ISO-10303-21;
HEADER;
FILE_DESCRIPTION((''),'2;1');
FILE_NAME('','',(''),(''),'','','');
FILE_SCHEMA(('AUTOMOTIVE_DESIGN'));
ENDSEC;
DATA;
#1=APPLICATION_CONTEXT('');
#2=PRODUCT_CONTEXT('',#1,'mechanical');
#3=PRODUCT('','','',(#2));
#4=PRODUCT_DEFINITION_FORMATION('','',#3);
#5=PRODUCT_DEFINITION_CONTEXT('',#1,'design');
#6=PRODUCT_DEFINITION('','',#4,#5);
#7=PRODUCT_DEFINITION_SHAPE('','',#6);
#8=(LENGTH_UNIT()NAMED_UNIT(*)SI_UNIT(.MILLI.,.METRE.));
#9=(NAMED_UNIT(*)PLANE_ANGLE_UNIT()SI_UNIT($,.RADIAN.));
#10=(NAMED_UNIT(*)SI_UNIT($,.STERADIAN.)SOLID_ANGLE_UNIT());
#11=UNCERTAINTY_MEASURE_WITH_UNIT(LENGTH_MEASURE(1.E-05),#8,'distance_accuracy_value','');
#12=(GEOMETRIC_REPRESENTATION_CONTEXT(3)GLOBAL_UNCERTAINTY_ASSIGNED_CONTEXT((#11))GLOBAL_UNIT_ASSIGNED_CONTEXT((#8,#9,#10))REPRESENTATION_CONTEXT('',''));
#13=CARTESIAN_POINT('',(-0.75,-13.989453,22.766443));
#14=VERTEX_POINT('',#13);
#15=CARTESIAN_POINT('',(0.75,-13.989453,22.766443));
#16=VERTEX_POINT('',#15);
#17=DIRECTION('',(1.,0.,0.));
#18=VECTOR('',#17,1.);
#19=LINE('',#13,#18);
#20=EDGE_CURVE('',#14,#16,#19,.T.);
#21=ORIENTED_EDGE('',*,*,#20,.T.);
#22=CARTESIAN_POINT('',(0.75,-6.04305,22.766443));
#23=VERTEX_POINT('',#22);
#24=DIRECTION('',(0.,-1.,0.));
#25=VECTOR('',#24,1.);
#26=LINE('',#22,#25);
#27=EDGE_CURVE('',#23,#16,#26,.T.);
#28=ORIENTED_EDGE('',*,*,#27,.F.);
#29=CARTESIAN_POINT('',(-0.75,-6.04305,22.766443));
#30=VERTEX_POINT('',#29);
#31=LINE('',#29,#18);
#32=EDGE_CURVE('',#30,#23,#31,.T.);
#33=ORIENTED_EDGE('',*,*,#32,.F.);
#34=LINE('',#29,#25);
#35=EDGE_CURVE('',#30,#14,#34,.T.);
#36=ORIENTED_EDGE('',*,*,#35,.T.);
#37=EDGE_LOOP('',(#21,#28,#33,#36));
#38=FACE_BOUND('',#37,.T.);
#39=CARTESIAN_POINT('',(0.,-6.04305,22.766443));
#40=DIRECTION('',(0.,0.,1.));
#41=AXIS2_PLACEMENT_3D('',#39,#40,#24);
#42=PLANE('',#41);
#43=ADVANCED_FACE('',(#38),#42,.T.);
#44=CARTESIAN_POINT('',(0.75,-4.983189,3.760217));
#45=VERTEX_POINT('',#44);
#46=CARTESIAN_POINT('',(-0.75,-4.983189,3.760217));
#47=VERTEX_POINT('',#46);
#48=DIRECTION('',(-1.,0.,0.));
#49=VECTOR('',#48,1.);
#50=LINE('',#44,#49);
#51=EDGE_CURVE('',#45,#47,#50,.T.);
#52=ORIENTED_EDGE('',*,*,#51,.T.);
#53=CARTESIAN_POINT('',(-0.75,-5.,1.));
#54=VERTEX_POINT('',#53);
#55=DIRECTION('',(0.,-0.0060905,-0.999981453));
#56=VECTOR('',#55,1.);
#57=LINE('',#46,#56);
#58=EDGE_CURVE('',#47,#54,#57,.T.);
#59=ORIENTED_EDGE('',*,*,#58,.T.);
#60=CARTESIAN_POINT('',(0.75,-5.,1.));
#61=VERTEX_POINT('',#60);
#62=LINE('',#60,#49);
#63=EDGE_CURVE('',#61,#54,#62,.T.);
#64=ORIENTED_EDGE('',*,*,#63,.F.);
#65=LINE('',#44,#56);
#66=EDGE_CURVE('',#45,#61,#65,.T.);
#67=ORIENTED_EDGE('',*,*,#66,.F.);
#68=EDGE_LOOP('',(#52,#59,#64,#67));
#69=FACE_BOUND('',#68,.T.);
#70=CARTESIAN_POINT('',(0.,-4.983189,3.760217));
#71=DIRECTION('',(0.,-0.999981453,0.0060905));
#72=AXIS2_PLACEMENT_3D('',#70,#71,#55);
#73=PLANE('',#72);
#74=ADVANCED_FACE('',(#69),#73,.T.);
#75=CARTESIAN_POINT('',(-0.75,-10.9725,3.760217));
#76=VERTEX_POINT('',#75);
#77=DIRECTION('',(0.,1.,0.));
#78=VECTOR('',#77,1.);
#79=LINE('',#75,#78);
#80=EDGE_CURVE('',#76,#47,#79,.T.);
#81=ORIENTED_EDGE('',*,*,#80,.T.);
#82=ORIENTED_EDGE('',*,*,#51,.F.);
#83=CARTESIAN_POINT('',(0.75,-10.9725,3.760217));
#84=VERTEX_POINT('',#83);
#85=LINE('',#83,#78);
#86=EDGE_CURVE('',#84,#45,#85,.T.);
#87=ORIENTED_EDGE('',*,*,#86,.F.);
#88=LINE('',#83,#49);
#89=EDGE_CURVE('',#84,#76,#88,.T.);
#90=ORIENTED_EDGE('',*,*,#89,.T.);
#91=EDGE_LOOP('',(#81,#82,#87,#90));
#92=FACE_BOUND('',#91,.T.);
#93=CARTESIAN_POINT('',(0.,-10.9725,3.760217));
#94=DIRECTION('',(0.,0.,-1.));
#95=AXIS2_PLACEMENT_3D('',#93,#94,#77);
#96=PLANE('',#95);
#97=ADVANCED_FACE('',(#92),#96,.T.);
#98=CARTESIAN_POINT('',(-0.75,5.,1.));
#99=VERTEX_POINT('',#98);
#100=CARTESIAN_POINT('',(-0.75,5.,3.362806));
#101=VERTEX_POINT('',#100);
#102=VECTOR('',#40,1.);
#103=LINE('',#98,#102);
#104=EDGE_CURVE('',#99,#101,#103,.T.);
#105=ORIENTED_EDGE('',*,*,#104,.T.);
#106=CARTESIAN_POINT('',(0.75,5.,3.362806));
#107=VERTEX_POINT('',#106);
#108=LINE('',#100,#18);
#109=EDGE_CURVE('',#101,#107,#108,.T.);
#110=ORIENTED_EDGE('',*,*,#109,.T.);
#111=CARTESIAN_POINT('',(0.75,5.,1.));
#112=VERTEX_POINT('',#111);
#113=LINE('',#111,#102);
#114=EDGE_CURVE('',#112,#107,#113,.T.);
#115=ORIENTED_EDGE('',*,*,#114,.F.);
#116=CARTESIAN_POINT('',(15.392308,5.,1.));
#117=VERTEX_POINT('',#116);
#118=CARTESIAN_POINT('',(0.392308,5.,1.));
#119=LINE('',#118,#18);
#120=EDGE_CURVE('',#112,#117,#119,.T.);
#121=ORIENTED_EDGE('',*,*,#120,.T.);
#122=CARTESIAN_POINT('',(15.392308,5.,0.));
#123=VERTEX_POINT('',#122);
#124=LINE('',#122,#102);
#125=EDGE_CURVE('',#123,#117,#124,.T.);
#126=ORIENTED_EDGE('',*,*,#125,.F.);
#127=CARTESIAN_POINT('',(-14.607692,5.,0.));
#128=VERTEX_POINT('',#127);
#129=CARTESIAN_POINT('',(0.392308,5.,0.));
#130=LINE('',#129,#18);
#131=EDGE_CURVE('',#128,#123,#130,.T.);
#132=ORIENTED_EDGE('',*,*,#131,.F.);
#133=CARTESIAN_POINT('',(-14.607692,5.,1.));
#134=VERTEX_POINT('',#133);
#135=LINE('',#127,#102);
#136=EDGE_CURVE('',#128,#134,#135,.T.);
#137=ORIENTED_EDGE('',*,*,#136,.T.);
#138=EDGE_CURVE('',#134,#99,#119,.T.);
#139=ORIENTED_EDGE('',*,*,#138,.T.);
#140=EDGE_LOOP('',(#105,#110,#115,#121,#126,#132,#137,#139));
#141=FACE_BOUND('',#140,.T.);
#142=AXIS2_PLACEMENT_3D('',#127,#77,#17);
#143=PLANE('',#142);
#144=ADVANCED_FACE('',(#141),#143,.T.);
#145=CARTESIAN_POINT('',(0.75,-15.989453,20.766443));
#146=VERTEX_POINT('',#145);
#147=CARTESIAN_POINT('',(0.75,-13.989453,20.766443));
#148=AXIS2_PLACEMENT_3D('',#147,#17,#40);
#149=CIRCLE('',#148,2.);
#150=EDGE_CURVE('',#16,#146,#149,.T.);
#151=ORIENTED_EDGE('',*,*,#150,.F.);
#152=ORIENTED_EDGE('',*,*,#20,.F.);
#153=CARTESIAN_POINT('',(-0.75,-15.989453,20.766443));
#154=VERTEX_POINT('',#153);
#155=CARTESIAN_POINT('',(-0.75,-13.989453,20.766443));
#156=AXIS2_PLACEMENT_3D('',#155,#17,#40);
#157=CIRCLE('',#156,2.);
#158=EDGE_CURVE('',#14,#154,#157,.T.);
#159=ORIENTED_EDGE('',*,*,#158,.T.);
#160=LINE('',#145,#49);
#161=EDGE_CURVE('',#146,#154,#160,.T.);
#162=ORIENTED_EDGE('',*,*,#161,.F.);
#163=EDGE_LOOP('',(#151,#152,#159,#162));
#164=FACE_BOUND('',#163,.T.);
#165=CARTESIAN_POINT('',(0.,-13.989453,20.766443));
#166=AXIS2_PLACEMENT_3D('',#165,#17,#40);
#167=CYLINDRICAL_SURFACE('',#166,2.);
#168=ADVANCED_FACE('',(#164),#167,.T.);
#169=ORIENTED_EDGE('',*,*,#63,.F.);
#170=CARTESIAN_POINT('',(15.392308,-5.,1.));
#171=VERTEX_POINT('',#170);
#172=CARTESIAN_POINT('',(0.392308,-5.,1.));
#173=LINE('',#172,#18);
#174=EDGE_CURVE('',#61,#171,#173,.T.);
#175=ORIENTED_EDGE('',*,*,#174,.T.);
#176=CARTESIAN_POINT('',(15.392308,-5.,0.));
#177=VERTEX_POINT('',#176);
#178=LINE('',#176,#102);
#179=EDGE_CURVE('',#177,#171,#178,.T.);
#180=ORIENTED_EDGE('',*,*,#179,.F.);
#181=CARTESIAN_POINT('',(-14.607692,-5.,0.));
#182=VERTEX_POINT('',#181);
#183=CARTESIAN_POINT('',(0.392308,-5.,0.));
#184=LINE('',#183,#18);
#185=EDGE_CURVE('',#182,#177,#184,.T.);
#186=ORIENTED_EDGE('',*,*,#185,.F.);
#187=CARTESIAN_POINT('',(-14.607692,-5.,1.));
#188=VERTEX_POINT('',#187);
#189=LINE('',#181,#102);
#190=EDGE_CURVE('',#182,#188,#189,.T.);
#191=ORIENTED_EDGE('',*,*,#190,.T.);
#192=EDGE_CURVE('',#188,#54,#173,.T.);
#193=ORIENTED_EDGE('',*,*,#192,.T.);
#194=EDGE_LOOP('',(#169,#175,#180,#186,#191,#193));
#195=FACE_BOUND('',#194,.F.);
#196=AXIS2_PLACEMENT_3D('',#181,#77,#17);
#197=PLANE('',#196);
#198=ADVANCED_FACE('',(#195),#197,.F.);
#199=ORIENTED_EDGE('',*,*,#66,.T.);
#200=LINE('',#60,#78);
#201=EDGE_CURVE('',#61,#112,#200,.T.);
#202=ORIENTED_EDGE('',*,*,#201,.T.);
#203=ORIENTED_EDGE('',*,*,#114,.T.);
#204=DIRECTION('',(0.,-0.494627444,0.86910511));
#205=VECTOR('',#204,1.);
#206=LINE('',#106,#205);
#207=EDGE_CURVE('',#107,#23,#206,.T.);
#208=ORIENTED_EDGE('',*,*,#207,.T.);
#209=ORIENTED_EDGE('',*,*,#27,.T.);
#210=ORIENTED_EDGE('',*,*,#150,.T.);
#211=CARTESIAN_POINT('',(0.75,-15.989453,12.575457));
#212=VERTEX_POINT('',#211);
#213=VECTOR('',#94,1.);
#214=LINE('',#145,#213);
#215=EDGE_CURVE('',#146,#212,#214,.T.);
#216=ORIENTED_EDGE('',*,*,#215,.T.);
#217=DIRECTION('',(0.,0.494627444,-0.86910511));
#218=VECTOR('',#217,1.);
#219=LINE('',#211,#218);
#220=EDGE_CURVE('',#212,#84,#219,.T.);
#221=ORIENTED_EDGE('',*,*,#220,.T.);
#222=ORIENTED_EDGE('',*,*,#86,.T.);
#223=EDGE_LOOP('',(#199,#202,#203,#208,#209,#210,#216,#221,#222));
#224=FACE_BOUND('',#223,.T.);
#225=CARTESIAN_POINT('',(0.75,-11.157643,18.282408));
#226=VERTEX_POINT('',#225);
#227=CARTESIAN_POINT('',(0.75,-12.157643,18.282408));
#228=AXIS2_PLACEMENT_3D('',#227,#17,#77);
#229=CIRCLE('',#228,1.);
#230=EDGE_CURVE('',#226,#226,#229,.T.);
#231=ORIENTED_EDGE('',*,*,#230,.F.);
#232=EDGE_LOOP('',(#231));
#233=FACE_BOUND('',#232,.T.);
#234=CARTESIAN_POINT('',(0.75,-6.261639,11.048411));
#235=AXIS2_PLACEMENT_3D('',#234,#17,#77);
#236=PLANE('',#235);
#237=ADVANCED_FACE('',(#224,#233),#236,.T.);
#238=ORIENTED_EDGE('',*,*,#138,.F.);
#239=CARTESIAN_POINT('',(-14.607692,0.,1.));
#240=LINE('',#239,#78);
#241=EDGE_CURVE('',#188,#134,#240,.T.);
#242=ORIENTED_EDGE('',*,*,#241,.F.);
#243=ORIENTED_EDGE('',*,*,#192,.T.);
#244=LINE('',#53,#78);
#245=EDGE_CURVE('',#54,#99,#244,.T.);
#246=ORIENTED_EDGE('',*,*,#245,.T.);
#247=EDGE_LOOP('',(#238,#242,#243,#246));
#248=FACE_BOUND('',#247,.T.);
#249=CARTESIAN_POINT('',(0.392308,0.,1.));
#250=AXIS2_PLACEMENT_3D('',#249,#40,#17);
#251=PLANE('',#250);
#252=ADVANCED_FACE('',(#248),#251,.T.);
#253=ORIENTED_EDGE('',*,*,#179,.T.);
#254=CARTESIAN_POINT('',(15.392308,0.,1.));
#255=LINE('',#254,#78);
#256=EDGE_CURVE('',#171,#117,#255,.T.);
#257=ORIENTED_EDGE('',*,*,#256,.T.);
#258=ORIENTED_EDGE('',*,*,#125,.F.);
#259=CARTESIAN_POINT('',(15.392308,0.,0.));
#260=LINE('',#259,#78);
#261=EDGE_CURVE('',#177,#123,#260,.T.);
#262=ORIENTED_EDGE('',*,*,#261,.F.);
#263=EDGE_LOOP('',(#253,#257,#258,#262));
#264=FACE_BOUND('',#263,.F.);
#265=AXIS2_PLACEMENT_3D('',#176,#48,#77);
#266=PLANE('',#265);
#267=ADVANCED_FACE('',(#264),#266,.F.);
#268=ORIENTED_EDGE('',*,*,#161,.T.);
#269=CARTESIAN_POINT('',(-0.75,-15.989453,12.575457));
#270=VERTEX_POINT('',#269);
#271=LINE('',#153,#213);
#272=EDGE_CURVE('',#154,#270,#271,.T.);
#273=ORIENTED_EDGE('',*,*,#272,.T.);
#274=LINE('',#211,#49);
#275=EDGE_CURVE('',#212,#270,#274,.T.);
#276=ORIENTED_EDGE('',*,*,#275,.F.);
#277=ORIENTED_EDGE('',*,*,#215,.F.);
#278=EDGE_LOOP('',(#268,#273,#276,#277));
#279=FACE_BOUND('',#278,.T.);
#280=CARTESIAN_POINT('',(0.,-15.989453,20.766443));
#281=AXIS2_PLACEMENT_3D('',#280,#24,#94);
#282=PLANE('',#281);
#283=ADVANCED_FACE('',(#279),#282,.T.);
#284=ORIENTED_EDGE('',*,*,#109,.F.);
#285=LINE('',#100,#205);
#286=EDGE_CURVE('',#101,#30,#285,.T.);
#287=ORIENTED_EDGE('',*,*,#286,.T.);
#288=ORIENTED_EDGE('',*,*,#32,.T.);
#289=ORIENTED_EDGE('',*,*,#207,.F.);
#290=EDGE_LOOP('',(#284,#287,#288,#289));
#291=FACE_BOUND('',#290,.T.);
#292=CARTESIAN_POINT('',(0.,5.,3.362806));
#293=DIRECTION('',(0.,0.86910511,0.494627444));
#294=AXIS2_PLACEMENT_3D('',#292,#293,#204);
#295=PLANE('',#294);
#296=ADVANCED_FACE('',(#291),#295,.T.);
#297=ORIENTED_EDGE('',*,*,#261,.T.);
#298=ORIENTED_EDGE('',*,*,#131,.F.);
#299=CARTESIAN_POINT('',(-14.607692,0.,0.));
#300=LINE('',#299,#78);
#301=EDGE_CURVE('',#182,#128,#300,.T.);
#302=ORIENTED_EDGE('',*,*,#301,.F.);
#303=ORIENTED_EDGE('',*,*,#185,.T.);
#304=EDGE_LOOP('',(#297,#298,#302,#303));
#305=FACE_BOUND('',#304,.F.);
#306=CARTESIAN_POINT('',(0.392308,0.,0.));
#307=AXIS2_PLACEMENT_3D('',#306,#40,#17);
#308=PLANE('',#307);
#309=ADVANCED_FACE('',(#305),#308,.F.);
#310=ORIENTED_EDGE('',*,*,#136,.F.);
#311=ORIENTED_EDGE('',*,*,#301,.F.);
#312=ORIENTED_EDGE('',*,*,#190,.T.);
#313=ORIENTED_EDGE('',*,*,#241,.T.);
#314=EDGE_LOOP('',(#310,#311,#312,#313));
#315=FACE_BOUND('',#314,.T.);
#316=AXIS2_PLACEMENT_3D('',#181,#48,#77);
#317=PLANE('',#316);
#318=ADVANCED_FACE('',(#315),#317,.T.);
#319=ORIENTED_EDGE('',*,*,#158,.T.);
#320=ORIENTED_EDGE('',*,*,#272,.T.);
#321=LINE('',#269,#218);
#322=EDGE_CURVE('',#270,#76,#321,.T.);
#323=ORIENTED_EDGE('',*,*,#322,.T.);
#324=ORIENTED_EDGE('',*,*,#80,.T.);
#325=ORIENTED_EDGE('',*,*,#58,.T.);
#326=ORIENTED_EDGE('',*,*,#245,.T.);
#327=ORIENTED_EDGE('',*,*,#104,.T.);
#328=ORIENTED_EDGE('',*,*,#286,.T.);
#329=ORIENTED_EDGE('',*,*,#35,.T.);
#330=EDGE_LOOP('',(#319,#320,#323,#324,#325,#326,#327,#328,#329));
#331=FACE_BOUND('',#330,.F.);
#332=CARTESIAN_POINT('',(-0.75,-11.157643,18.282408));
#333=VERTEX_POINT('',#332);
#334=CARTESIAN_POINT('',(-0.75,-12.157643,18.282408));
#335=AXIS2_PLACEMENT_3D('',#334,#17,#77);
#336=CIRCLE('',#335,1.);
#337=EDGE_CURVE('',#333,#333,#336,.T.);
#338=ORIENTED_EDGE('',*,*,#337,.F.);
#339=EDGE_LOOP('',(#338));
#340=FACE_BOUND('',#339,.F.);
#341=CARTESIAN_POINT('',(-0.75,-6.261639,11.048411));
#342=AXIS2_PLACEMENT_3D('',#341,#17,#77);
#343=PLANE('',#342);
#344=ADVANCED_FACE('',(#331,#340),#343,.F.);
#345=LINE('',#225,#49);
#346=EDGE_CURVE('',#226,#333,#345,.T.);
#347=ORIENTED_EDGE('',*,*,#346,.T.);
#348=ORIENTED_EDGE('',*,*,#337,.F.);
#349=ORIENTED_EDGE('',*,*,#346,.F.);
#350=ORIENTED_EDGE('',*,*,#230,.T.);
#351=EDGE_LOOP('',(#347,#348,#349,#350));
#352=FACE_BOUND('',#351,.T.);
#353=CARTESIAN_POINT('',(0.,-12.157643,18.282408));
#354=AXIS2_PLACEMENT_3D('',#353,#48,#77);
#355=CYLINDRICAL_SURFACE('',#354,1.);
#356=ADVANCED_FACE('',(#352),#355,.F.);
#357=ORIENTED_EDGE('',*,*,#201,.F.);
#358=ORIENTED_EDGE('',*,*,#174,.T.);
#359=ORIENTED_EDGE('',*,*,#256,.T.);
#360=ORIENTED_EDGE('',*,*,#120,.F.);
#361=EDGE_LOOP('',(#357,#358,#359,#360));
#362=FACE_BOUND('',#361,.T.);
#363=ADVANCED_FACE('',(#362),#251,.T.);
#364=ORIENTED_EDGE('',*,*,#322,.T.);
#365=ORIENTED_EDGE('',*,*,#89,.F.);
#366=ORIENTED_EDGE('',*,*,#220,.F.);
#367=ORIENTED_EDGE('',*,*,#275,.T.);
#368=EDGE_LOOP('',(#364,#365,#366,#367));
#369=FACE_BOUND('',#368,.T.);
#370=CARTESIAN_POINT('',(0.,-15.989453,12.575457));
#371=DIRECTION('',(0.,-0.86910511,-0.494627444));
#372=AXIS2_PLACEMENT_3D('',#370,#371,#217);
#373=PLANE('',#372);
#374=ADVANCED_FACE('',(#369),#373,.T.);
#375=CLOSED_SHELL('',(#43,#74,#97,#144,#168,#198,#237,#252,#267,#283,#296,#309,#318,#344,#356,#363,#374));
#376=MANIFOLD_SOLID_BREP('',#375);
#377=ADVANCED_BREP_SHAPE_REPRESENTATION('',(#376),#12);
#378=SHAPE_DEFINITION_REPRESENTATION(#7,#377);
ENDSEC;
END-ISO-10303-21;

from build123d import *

# Parameters (mm, degrees)
F0_W     = 30
F0_H     = 10
F1_DEPTH = 1
F2_R     = 1
F3_DEPTH = 0.75


# Not quite as in the source:
# - a feature of the source that left no trace in its solid (it failed there, or was rolled back) is left out


with BuildPart() as f1:
    # F0 (on Top) → F1 (new body)
    with BuildSketch(Plane.XY):
        with Locations((0.392307792, 0)):
            Rectangle(F0_W, F0_H)
    extrude(amount=F1_DEPTH)

    # F2 (on Right) → F3 (join, symmetric)
    with BuildSketch(Plane.YZ):
        with BuildLine():
            Line((-5, 1), (5, 1))
            Line((5, 1), (5, 3.3628055826))
            Line((5, 3.3628055826), (-6.0430504382, 22.7664429694))
            Line((-6.0430504382, 22.7664429694), (-13.9894526005, 22.7664429694))
            ThreePointArc((-13.9894526005, 22.7664429694), (-15.4036661629, 22.1806565318), (-15.9894526005, 20.7664429694))
            Line((-15.9894526005, 20.7664429694), (-15.9894526005, 12.5754568726))
            Line((-15.9894526005, 12.5754568726), (-10.9724997157, 3.7602173598))
            Line((-10.9724997157, 3.7602173598), (-4.9831885844, 3.7602173598))
            Line((-4.9831885844, 3.7602173598), (-5, 1))
        make_face()
        with Locations((-12.1576432139, 18.2824078947)):
            Circle(F2_R, mode=Mode.SUBTRACT)
    extrude(amount=F3_DEPTH, both=True)


solid = f1.part
